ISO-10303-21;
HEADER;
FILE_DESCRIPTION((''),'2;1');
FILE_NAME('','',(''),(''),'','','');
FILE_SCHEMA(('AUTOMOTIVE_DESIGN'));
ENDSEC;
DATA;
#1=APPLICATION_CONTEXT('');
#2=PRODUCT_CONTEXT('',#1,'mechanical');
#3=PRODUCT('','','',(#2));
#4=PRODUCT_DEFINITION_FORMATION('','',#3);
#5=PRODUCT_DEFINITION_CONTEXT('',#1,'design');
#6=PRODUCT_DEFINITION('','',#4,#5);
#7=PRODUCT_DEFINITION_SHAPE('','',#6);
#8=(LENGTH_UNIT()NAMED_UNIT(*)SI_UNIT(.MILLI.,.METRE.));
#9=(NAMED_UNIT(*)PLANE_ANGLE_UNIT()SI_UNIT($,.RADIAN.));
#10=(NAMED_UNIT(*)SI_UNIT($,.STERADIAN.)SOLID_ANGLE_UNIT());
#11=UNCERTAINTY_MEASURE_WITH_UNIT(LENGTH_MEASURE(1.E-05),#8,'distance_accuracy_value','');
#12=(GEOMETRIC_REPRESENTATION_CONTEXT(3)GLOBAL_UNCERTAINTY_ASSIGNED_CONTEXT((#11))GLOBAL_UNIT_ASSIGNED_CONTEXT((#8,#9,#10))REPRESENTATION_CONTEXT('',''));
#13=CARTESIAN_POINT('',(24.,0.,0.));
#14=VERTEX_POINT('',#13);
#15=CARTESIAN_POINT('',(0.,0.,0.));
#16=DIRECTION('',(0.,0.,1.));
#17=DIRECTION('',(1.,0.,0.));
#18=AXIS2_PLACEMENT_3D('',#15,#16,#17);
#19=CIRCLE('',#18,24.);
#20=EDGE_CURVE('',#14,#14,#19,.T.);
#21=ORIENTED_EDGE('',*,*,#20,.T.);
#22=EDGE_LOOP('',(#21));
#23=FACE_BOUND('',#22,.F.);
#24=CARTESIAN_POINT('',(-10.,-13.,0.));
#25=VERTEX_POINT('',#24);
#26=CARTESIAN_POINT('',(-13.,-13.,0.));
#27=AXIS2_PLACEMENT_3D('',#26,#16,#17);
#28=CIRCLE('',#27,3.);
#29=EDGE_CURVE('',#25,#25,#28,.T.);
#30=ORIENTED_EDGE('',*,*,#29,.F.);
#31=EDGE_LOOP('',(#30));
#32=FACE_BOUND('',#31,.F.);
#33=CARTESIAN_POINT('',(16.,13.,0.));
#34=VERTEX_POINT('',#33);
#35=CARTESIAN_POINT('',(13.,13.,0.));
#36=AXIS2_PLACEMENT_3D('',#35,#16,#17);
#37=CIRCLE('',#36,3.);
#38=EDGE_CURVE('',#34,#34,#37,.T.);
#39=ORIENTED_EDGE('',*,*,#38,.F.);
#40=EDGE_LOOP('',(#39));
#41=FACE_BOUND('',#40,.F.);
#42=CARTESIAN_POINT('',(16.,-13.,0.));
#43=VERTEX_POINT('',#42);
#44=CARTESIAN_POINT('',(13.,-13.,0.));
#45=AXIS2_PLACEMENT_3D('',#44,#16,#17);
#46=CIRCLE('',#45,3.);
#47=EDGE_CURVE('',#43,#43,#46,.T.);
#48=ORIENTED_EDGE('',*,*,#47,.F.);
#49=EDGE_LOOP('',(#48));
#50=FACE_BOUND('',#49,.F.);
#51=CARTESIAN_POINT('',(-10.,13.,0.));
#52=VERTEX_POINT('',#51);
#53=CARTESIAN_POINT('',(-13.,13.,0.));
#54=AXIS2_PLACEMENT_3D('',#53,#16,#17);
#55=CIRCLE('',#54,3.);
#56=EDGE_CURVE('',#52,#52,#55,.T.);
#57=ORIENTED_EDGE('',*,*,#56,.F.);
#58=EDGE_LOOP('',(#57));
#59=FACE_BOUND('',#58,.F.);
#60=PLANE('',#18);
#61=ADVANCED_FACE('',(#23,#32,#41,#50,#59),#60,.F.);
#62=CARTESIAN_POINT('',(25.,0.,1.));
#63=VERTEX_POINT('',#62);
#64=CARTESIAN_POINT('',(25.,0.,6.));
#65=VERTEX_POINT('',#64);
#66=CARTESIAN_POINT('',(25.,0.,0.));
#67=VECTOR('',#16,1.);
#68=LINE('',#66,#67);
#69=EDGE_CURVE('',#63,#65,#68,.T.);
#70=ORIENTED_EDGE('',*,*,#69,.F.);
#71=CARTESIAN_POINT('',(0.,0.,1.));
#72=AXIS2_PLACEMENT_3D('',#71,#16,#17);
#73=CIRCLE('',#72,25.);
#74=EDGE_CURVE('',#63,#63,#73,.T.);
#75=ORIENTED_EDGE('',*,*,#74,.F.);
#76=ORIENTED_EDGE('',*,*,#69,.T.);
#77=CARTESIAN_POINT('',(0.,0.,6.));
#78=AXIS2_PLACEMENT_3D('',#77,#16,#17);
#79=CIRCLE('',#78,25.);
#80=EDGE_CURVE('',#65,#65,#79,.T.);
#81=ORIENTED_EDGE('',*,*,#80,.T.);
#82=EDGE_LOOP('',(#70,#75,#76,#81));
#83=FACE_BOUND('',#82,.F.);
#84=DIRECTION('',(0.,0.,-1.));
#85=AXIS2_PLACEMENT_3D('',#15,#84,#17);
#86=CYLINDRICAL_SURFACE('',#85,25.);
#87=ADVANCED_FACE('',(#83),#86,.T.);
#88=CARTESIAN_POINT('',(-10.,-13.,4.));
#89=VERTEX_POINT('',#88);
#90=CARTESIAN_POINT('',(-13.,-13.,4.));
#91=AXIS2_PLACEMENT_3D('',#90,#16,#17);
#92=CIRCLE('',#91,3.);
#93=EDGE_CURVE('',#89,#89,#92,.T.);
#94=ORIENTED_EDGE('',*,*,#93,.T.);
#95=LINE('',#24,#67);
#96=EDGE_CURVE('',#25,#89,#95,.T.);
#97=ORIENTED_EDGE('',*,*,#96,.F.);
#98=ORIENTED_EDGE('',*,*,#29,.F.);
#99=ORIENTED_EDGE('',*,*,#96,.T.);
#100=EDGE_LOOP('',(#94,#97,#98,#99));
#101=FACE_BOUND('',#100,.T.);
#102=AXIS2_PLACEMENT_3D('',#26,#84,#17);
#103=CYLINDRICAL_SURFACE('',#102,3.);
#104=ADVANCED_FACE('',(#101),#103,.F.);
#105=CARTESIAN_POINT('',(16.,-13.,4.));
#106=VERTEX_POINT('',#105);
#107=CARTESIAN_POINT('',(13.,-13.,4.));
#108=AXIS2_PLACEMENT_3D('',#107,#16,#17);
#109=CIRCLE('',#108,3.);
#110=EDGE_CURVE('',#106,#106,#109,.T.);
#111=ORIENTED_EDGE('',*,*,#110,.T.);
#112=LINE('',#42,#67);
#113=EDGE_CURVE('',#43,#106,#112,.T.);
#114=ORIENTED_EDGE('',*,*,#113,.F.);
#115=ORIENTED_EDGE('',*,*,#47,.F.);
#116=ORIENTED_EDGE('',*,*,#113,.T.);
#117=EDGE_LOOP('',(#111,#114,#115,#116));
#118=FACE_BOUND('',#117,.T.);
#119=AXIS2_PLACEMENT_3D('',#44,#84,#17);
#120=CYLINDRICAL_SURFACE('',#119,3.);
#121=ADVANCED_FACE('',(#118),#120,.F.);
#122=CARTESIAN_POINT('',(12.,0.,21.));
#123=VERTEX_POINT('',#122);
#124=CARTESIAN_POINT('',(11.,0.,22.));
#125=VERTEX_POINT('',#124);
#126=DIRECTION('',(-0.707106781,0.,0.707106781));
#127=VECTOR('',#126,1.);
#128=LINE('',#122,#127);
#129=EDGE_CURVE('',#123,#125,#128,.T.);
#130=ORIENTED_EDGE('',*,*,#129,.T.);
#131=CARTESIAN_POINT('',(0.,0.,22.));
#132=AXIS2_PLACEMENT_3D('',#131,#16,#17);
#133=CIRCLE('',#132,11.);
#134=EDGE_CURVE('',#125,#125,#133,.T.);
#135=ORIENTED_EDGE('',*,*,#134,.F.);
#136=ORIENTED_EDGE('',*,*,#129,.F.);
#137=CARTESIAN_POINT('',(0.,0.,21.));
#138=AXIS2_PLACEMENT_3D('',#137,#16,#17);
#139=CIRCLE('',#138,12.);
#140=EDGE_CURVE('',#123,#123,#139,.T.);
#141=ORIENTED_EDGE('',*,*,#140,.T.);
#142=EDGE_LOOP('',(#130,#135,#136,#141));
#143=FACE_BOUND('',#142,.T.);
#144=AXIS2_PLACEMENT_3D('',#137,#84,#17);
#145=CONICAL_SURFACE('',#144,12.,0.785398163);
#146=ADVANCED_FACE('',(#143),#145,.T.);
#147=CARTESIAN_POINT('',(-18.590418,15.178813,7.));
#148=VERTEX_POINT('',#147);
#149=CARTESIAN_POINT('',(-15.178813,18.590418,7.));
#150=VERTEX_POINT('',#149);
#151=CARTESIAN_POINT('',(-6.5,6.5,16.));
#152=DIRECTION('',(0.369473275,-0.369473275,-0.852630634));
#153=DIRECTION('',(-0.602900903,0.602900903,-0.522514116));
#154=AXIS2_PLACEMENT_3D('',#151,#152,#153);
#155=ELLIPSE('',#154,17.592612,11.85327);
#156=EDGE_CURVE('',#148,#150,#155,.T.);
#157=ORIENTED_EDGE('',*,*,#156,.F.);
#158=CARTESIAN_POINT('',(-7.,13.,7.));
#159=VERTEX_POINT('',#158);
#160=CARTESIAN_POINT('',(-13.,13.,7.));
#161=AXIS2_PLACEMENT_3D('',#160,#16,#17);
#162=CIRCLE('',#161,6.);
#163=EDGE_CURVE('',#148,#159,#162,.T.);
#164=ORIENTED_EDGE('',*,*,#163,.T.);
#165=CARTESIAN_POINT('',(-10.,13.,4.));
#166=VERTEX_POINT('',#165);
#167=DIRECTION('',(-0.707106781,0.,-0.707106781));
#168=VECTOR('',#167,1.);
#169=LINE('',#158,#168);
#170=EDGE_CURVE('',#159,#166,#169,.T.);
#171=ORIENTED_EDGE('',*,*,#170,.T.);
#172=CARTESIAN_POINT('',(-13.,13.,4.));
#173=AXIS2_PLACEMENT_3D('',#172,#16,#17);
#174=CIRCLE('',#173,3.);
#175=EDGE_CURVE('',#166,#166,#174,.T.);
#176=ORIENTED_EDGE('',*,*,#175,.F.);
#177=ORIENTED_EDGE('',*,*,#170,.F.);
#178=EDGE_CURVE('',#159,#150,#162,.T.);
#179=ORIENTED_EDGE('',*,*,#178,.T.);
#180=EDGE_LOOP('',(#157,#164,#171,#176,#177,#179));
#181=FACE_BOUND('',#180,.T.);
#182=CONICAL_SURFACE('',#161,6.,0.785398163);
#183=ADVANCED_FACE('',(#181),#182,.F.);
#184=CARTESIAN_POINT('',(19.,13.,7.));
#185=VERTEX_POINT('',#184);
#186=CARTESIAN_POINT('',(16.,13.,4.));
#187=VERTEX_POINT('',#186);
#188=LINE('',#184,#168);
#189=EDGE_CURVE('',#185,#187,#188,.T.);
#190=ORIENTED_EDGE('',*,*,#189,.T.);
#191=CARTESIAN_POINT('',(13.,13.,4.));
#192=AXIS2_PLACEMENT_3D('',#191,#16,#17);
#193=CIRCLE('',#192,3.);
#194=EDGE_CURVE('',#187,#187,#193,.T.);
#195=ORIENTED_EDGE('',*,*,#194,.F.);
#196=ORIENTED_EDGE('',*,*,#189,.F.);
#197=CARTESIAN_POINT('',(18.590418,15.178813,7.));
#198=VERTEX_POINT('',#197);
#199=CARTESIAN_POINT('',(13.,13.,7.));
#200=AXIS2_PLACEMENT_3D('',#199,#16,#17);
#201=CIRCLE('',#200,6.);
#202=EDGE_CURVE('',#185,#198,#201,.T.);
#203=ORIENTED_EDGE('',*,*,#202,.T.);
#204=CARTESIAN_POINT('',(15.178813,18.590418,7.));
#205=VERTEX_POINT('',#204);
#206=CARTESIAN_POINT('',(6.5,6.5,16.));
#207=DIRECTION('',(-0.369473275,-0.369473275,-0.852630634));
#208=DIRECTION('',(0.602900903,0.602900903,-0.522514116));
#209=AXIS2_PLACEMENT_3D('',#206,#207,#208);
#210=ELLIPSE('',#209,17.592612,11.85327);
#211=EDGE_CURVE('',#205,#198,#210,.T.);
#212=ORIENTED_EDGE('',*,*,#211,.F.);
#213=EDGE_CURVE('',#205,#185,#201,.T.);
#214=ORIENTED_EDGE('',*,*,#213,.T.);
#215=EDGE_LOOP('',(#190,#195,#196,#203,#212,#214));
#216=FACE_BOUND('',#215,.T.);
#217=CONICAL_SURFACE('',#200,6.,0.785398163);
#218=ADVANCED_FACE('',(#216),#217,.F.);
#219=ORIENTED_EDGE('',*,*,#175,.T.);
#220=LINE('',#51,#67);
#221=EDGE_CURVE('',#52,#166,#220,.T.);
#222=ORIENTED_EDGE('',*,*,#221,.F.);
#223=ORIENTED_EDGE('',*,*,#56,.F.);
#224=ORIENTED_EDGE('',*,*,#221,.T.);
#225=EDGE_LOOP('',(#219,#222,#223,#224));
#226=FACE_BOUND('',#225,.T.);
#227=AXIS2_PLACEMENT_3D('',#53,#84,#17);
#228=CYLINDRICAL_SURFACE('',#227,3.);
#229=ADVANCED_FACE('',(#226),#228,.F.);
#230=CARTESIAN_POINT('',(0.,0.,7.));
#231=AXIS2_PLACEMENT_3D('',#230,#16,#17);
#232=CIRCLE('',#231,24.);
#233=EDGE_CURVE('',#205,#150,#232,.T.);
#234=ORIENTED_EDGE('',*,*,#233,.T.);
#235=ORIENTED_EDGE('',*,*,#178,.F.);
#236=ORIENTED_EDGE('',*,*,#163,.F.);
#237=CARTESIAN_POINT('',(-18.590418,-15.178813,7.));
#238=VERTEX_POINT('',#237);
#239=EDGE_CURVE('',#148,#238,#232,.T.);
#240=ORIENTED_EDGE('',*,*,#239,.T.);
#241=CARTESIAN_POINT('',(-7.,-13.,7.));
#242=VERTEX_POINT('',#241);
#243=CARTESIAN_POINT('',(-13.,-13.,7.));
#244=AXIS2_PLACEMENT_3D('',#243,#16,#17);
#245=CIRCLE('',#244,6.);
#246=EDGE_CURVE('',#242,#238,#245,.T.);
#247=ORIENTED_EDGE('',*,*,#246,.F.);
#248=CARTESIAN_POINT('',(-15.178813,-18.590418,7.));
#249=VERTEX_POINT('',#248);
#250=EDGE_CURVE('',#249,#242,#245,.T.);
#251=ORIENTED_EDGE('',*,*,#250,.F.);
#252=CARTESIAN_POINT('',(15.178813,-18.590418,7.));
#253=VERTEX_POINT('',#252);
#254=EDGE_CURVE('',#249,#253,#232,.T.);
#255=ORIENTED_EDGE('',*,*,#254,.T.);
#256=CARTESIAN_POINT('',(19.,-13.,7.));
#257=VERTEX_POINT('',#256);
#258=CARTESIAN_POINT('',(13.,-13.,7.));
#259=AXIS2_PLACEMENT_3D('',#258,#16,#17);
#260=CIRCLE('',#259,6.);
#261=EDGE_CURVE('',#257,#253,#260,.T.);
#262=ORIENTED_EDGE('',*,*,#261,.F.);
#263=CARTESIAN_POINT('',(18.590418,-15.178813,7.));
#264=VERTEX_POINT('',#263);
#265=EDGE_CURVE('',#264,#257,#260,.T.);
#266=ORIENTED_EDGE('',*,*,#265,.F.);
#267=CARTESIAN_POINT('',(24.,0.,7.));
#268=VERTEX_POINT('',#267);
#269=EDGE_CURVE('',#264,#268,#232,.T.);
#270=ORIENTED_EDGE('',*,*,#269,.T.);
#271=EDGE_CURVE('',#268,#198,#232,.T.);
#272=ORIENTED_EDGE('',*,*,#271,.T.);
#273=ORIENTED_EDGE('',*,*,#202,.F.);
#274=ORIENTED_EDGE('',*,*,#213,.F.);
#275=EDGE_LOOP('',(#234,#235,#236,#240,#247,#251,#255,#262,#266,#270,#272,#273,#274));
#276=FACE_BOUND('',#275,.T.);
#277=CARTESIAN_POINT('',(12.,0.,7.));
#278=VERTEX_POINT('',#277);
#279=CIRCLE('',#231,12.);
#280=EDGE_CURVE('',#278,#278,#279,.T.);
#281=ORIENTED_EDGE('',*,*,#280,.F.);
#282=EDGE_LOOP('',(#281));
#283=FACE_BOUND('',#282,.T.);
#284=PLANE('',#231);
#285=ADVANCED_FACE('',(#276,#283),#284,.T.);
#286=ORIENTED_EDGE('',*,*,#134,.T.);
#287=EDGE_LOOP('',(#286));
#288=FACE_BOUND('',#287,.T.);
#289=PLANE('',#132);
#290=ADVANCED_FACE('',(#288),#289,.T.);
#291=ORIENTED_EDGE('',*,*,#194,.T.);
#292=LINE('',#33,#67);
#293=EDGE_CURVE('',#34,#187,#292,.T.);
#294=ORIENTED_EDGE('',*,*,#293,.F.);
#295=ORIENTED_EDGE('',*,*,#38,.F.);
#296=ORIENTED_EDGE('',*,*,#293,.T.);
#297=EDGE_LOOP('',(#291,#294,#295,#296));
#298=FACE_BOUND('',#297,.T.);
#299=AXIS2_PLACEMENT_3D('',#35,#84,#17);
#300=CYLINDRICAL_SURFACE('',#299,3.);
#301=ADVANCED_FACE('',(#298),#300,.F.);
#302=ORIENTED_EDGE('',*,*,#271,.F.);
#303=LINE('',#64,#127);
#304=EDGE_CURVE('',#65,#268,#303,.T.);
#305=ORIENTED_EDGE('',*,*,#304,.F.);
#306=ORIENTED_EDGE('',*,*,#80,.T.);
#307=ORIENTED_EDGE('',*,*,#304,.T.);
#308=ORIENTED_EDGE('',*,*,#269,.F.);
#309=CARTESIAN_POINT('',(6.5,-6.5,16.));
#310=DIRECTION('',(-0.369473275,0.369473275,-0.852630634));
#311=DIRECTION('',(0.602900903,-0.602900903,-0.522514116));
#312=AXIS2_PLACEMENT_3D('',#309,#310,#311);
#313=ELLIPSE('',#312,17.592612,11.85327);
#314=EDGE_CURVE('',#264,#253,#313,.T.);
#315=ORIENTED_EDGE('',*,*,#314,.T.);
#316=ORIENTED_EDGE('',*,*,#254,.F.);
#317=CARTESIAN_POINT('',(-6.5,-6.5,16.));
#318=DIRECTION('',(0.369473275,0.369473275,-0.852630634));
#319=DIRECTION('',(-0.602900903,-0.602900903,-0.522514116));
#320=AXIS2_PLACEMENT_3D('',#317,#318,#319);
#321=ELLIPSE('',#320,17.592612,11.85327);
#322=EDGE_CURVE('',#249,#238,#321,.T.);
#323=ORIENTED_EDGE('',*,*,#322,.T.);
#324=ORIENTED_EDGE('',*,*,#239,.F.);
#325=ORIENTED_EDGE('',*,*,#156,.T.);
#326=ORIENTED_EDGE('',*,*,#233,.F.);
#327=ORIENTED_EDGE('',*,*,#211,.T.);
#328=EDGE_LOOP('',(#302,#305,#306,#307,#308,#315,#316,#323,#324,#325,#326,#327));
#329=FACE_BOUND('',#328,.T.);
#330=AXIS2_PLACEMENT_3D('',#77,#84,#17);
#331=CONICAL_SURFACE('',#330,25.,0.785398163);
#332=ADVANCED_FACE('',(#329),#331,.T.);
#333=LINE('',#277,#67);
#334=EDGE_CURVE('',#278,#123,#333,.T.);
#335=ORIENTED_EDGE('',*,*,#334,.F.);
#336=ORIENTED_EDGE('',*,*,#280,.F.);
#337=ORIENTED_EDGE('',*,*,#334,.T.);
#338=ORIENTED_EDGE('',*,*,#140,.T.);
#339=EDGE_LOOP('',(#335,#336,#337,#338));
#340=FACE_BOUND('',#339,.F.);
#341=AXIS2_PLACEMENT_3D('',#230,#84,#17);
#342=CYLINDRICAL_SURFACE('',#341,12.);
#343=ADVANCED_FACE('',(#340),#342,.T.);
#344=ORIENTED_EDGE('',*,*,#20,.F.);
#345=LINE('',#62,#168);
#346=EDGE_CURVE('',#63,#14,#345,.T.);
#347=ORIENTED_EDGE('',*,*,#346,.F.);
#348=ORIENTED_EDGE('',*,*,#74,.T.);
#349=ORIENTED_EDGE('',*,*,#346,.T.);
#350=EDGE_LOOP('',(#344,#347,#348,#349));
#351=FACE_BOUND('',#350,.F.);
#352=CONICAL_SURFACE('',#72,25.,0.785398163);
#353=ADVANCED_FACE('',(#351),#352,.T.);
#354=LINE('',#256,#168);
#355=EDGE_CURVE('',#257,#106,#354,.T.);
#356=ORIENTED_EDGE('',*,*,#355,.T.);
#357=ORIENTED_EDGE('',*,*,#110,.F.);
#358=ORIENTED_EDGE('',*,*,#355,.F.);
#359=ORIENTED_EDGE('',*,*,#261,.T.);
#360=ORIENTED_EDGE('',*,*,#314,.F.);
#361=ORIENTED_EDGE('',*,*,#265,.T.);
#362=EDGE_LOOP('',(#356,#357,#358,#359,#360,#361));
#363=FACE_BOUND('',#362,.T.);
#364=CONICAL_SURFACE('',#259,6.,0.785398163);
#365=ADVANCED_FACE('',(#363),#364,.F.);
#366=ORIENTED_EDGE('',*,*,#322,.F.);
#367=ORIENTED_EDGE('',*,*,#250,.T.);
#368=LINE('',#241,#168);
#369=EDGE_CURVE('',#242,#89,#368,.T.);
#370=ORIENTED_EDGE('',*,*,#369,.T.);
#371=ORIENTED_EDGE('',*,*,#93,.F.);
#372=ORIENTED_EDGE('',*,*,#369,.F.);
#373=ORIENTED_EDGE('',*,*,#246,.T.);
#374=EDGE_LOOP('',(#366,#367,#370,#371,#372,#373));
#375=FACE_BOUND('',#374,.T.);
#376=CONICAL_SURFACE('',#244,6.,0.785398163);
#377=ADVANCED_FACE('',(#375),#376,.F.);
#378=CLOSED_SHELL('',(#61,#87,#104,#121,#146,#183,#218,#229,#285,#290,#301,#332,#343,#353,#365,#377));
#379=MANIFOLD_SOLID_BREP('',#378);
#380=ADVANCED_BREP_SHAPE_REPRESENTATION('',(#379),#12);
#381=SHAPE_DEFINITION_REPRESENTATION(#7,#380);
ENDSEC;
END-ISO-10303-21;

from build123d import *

# Parameters (mm, degrees)
F0_R     = 25
F0_R_2   = 3
F1_DEPTH = 7
F2_R     = 12
F3_DEPTH = 15
F4_SIZE  = 1


# Not quite as in the source:
# - a fillet or chamfer that OpenCascade refuses, or shapes differently, is made with other operations: its cross-section is extruded or revolved along the edge and cut away or added


with BuildPart() as f1:
    # F0 (on Top) → F1 (new body)
    with BuildSketch(Plane.XY):
        Circle(F0_R)
        with Locations((-13, -13)):
            Circle(F0_R_2, mode=Mode.SUBTRACT)
        with Locations((13, -13)):
            Circle(F0_R_2, mode=Mode.SUBTRACT)
        with Locations((-13, 13)):
            Circle(F0_R_2, mode=Mode.SUBTRACT)
        with Locations((13, 13)):
            Circle(F0_R_2, mode=Mode.SUBTRACT)
    extrude(amount=F1_DEPTH)

    # F2 (on face) → F3 (join)
    with BuildSketch(Plane.XY.offset(7)):
        Circle(F2_R)
    extrude(amount=F3_DEPTH)

    # F4
    f4_edges = [f1.edges().sort_by_distance(p)[0] for p in [
        (-12, 0, 22),
        (-25, 0, 7),
        (-25, 0, 0),
    ]]
    chamfer(f4_edges, length=F4_SIZE)

    # F5: chamfer of 3 on 4 edges, made by hand

    # F5_s1 → F5_t2 (revolve, cut)
    with BuildSketch(Plane.XZ.offset(13)):
        Polygon((-7, 7), (-10, 4), (-10, 7), align=None)
    revolve(axis=Axis((-13, -13, 7), (0, 0, 1)), mode=Mode.SUBTRACT)

    # F5_s3 → F5_t4 (revolve, cut)
    with BuildSketch(Plane.XZ.offset(13)):
        Polygon((19, 7), (16, 4), (16, 7), align=None)
    revolve(axis=Axis((13, -13, 7), (0, 0, 1)), mode=Mode.SUBTRACT)

    # F5_s5 → F5_t6 (revolve, cut)
    with BuildSketch(Plane.XZ.offset(-13)):
        Polygon((19, 7), (16, 4), (16, 7), align=None)
    revolve(axis=Axis((13, 13, 7), (0, 0, 1)), mode=Mode.SUBTRACT)

    # F5_s7 → F5_t8 (revolve, cut)
    with BuildSketch(Plane.XZ.offset(-13)):
        Polygon((-7, 7), (-10, 4), (-10, 7), align=None)
    revolve(axis=Axis((-13, 13, 7), (0, 0, 1)), mode=Mode.SUBTRACT)


solid = f1.part
